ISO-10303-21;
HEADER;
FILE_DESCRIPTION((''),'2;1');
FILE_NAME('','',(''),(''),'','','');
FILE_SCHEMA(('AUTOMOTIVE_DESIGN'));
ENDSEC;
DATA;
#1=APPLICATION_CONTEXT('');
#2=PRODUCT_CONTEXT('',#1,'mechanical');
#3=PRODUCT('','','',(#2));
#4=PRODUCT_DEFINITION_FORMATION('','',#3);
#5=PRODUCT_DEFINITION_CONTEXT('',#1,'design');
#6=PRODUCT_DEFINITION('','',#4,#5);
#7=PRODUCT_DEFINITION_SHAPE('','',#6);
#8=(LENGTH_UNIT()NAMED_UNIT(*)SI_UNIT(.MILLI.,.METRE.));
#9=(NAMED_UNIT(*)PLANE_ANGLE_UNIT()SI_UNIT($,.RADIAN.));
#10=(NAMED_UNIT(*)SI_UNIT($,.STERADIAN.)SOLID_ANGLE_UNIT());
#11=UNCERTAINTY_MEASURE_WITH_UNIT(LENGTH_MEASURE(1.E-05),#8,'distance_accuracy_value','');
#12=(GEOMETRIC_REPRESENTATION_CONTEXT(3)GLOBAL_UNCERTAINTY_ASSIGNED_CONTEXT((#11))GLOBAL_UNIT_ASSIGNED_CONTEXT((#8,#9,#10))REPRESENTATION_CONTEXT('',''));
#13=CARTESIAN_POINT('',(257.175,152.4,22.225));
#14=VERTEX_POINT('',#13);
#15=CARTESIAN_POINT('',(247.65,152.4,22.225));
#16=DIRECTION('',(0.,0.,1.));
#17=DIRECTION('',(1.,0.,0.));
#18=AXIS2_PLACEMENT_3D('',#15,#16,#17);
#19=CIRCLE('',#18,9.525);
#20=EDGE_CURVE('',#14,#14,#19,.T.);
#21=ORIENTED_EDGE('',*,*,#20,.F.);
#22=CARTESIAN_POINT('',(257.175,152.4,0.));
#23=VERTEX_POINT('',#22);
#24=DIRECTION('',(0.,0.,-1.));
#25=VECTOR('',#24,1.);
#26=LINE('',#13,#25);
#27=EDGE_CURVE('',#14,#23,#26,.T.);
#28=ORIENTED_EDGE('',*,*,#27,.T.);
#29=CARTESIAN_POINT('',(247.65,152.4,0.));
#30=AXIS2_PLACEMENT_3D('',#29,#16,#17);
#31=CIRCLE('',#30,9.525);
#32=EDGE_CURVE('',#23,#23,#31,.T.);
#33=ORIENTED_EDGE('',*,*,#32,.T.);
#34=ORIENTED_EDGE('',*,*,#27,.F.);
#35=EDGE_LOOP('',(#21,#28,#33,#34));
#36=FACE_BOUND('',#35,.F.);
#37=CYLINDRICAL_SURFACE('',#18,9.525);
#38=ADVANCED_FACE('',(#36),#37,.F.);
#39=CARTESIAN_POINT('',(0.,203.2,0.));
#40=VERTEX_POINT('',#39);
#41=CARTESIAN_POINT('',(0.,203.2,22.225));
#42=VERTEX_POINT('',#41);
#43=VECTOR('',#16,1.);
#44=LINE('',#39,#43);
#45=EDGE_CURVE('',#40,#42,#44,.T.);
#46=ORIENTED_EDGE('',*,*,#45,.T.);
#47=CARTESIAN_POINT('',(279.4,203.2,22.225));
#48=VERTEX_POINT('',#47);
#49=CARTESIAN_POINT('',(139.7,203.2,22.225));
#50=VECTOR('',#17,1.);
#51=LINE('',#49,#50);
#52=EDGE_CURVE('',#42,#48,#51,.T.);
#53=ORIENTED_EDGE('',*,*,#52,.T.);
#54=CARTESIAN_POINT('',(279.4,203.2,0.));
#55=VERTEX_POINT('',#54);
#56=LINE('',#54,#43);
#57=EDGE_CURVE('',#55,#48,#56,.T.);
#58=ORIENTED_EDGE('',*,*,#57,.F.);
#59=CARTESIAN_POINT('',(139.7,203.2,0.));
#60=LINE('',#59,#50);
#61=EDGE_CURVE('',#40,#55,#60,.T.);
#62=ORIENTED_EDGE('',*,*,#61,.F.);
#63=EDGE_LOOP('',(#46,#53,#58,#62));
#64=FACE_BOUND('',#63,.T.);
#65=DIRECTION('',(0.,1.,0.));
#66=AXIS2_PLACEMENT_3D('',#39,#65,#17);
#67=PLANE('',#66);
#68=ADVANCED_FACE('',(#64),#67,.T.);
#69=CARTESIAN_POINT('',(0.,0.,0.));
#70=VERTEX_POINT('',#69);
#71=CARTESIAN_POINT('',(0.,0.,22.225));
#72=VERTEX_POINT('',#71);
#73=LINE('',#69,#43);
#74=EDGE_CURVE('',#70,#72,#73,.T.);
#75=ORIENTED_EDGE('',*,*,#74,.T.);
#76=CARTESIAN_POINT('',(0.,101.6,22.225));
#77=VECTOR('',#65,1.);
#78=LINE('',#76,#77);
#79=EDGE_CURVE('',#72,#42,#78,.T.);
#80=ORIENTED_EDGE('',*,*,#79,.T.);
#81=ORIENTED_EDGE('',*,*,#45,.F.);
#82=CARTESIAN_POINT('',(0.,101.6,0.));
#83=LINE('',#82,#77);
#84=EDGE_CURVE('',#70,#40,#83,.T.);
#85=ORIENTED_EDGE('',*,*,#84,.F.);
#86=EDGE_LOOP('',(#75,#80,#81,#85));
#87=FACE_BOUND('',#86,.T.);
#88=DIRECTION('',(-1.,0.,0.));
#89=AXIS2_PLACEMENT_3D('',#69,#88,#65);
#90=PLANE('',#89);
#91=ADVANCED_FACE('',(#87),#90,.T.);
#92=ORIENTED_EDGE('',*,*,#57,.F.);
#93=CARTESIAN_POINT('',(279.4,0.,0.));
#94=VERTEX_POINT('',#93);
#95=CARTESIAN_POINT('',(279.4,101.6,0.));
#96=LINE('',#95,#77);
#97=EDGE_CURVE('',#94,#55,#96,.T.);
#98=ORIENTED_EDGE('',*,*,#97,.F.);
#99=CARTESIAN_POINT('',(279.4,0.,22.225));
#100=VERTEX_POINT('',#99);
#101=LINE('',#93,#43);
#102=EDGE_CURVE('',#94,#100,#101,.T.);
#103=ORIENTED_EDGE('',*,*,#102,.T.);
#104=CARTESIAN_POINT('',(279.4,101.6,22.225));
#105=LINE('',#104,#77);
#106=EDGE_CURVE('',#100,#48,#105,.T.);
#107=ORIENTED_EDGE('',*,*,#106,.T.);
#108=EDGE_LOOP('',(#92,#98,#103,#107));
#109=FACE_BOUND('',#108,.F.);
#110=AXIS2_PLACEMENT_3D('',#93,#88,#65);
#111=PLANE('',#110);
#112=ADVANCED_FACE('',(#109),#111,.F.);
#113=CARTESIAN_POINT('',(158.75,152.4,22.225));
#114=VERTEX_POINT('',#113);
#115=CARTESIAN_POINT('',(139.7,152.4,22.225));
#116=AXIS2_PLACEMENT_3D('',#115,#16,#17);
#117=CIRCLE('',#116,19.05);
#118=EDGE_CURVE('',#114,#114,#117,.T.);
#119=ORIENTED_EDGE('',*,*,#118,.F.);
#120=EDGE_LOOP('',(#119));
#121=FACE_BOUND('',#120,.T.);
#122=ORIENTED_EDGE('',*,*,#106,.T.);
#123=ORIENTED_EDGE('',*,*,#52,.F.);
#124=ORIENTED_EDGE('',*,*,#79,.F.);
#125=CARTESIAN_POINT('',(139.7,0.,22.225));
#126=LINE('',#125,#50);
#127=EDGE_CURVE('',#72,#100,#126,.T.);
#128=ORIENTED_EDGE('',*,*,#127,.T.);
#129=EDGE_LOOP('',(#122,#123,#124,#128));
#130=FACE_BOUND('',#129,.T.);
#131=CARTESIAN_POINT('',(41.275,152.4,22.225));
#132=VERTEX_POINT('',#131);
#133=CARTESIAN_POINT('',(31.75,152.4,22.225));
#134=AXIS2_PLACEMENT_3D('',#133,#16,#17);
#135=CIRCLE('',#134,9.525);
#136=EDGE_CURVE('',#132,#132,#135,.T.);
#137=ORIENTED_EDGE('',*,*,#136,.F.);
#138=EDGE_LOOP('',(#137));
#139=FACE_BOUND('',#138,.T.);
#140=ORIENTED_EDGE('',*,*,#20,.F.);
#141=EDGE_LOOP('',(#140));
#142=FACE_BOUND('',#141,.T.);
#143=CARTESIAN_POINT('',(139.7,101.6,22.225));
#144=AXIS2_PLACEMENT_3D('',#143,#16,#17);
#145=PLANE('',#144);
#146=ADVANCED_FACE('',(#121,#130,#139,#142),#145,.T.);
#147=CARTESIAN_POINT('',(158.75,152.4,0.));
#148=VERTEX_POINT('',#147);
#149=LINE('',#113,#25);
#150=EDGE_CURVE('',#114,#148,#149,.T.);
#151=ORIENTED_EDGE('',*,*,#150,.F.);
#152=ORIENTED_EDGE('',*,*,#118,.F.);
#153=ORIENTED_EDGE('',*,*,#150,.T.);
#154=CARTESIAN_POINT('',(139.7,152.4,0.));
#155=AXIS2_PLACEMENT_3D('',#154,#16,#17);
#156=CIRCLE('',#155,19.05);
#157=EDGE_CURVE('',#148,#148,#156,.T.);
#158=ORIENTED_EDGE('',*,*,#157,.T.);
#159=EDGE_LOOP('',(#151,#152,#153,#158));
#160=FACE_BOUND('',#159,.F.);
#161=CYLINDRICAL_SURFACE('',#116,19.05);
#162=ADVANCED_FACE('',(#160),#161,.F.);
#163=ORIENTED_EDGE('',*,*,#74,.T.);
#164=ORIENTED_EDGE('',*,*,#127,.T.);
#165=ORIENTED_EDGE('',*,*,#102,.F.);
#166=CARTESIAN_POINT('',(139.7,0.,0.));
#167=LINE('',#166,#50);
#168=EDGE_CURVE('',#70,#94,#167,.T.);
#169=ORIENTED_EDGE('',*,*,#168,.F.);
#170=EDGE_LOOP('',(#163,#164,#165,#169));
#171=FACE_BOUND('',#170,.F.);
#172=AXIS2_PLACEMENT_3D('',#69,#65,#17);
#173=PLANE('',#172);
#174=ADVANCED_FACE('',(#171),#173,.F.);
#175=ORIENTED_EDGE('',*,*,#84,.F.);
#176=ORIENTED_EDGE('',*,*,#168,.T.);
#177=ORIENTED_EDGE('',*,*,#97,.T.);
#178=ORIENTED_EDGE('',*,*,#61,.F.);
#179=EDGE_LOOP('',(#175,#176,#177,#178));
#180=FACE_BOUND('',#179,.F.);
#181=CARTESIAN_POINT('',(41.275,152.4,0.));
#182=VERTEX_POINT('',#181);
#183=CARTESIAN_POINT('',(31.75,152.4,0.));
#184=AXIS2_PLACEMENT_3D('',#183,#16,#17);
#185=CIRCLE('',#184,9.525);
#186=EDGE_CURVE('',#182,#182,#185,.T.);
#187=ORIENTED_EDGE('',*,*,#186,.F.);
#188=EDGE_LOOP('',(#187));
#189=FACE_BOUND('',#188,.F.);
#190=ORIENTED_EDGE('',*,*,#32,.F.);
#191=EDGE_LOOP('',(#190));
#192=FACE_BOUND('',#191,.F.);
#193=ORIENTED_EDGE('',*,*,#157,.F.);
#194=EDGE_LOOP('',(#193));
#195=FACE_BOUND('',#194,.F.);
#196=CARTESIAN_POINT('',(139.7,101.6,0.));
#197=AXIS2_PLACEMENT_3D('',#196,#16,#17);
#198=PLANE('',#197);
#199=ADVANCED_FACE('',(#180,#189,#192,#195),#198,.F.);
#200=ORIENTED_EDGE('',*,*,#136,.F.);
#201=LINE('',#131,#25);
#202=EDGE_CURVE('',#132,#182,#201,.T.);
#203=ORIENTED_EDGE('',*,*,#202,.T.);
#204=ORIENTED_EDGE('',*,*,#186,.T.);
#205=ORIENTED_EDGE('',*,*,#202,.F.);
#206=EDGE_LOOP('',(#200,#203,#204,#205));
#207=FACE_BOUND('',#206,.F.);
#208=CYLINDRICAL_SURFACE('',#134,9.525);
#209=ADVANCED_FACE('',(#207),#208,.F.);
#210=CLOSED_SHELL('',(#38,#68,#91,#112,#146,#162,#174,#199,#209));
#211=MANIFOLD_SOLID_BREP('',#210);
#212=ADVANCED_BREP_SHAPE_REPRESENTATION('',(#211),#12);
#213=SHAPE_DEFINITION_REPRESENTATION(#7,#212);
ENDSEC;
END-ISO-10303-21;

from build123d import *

# Parameters (mm, degrees)
F0_W     = 279.4
F0_H     = 203.2
F1_DEPTH = 22.225
F2_R     = 19.05
F2_R_2   = 9.525
F3_DEPTH = 22.225


# Not quite as in the source:
# - a length typed as a fraction of an inch, garbled in the dataset ("3 / 203.2 mm" for 3/8 in), is restored


with BuildPart() as f1:
    # F0 (on Top) → F1 (new body)
    with BuildSketch(Plane.XY):
        with Locations((139.7, 101.6)):
            Rectangle(F0_W, F0_H)
    extrude(amount=F1_DEPTH)

    # F2 (on face) → F3 (cut)
    with BuildSketch(Plane.XY.offset(22.225)):
        with Locations((139.7, 152.4)):
            Circle(F2_R)
        with Locations((247.65, 152.4)):
            Circle(F2_R_2)
        with Locations((31.75, 152.4)):
            Circle(F2_R_2)
    extrude(amount=-F3_DEPTH, mode=Mode.SUBTRACT)


solid = f1.part
